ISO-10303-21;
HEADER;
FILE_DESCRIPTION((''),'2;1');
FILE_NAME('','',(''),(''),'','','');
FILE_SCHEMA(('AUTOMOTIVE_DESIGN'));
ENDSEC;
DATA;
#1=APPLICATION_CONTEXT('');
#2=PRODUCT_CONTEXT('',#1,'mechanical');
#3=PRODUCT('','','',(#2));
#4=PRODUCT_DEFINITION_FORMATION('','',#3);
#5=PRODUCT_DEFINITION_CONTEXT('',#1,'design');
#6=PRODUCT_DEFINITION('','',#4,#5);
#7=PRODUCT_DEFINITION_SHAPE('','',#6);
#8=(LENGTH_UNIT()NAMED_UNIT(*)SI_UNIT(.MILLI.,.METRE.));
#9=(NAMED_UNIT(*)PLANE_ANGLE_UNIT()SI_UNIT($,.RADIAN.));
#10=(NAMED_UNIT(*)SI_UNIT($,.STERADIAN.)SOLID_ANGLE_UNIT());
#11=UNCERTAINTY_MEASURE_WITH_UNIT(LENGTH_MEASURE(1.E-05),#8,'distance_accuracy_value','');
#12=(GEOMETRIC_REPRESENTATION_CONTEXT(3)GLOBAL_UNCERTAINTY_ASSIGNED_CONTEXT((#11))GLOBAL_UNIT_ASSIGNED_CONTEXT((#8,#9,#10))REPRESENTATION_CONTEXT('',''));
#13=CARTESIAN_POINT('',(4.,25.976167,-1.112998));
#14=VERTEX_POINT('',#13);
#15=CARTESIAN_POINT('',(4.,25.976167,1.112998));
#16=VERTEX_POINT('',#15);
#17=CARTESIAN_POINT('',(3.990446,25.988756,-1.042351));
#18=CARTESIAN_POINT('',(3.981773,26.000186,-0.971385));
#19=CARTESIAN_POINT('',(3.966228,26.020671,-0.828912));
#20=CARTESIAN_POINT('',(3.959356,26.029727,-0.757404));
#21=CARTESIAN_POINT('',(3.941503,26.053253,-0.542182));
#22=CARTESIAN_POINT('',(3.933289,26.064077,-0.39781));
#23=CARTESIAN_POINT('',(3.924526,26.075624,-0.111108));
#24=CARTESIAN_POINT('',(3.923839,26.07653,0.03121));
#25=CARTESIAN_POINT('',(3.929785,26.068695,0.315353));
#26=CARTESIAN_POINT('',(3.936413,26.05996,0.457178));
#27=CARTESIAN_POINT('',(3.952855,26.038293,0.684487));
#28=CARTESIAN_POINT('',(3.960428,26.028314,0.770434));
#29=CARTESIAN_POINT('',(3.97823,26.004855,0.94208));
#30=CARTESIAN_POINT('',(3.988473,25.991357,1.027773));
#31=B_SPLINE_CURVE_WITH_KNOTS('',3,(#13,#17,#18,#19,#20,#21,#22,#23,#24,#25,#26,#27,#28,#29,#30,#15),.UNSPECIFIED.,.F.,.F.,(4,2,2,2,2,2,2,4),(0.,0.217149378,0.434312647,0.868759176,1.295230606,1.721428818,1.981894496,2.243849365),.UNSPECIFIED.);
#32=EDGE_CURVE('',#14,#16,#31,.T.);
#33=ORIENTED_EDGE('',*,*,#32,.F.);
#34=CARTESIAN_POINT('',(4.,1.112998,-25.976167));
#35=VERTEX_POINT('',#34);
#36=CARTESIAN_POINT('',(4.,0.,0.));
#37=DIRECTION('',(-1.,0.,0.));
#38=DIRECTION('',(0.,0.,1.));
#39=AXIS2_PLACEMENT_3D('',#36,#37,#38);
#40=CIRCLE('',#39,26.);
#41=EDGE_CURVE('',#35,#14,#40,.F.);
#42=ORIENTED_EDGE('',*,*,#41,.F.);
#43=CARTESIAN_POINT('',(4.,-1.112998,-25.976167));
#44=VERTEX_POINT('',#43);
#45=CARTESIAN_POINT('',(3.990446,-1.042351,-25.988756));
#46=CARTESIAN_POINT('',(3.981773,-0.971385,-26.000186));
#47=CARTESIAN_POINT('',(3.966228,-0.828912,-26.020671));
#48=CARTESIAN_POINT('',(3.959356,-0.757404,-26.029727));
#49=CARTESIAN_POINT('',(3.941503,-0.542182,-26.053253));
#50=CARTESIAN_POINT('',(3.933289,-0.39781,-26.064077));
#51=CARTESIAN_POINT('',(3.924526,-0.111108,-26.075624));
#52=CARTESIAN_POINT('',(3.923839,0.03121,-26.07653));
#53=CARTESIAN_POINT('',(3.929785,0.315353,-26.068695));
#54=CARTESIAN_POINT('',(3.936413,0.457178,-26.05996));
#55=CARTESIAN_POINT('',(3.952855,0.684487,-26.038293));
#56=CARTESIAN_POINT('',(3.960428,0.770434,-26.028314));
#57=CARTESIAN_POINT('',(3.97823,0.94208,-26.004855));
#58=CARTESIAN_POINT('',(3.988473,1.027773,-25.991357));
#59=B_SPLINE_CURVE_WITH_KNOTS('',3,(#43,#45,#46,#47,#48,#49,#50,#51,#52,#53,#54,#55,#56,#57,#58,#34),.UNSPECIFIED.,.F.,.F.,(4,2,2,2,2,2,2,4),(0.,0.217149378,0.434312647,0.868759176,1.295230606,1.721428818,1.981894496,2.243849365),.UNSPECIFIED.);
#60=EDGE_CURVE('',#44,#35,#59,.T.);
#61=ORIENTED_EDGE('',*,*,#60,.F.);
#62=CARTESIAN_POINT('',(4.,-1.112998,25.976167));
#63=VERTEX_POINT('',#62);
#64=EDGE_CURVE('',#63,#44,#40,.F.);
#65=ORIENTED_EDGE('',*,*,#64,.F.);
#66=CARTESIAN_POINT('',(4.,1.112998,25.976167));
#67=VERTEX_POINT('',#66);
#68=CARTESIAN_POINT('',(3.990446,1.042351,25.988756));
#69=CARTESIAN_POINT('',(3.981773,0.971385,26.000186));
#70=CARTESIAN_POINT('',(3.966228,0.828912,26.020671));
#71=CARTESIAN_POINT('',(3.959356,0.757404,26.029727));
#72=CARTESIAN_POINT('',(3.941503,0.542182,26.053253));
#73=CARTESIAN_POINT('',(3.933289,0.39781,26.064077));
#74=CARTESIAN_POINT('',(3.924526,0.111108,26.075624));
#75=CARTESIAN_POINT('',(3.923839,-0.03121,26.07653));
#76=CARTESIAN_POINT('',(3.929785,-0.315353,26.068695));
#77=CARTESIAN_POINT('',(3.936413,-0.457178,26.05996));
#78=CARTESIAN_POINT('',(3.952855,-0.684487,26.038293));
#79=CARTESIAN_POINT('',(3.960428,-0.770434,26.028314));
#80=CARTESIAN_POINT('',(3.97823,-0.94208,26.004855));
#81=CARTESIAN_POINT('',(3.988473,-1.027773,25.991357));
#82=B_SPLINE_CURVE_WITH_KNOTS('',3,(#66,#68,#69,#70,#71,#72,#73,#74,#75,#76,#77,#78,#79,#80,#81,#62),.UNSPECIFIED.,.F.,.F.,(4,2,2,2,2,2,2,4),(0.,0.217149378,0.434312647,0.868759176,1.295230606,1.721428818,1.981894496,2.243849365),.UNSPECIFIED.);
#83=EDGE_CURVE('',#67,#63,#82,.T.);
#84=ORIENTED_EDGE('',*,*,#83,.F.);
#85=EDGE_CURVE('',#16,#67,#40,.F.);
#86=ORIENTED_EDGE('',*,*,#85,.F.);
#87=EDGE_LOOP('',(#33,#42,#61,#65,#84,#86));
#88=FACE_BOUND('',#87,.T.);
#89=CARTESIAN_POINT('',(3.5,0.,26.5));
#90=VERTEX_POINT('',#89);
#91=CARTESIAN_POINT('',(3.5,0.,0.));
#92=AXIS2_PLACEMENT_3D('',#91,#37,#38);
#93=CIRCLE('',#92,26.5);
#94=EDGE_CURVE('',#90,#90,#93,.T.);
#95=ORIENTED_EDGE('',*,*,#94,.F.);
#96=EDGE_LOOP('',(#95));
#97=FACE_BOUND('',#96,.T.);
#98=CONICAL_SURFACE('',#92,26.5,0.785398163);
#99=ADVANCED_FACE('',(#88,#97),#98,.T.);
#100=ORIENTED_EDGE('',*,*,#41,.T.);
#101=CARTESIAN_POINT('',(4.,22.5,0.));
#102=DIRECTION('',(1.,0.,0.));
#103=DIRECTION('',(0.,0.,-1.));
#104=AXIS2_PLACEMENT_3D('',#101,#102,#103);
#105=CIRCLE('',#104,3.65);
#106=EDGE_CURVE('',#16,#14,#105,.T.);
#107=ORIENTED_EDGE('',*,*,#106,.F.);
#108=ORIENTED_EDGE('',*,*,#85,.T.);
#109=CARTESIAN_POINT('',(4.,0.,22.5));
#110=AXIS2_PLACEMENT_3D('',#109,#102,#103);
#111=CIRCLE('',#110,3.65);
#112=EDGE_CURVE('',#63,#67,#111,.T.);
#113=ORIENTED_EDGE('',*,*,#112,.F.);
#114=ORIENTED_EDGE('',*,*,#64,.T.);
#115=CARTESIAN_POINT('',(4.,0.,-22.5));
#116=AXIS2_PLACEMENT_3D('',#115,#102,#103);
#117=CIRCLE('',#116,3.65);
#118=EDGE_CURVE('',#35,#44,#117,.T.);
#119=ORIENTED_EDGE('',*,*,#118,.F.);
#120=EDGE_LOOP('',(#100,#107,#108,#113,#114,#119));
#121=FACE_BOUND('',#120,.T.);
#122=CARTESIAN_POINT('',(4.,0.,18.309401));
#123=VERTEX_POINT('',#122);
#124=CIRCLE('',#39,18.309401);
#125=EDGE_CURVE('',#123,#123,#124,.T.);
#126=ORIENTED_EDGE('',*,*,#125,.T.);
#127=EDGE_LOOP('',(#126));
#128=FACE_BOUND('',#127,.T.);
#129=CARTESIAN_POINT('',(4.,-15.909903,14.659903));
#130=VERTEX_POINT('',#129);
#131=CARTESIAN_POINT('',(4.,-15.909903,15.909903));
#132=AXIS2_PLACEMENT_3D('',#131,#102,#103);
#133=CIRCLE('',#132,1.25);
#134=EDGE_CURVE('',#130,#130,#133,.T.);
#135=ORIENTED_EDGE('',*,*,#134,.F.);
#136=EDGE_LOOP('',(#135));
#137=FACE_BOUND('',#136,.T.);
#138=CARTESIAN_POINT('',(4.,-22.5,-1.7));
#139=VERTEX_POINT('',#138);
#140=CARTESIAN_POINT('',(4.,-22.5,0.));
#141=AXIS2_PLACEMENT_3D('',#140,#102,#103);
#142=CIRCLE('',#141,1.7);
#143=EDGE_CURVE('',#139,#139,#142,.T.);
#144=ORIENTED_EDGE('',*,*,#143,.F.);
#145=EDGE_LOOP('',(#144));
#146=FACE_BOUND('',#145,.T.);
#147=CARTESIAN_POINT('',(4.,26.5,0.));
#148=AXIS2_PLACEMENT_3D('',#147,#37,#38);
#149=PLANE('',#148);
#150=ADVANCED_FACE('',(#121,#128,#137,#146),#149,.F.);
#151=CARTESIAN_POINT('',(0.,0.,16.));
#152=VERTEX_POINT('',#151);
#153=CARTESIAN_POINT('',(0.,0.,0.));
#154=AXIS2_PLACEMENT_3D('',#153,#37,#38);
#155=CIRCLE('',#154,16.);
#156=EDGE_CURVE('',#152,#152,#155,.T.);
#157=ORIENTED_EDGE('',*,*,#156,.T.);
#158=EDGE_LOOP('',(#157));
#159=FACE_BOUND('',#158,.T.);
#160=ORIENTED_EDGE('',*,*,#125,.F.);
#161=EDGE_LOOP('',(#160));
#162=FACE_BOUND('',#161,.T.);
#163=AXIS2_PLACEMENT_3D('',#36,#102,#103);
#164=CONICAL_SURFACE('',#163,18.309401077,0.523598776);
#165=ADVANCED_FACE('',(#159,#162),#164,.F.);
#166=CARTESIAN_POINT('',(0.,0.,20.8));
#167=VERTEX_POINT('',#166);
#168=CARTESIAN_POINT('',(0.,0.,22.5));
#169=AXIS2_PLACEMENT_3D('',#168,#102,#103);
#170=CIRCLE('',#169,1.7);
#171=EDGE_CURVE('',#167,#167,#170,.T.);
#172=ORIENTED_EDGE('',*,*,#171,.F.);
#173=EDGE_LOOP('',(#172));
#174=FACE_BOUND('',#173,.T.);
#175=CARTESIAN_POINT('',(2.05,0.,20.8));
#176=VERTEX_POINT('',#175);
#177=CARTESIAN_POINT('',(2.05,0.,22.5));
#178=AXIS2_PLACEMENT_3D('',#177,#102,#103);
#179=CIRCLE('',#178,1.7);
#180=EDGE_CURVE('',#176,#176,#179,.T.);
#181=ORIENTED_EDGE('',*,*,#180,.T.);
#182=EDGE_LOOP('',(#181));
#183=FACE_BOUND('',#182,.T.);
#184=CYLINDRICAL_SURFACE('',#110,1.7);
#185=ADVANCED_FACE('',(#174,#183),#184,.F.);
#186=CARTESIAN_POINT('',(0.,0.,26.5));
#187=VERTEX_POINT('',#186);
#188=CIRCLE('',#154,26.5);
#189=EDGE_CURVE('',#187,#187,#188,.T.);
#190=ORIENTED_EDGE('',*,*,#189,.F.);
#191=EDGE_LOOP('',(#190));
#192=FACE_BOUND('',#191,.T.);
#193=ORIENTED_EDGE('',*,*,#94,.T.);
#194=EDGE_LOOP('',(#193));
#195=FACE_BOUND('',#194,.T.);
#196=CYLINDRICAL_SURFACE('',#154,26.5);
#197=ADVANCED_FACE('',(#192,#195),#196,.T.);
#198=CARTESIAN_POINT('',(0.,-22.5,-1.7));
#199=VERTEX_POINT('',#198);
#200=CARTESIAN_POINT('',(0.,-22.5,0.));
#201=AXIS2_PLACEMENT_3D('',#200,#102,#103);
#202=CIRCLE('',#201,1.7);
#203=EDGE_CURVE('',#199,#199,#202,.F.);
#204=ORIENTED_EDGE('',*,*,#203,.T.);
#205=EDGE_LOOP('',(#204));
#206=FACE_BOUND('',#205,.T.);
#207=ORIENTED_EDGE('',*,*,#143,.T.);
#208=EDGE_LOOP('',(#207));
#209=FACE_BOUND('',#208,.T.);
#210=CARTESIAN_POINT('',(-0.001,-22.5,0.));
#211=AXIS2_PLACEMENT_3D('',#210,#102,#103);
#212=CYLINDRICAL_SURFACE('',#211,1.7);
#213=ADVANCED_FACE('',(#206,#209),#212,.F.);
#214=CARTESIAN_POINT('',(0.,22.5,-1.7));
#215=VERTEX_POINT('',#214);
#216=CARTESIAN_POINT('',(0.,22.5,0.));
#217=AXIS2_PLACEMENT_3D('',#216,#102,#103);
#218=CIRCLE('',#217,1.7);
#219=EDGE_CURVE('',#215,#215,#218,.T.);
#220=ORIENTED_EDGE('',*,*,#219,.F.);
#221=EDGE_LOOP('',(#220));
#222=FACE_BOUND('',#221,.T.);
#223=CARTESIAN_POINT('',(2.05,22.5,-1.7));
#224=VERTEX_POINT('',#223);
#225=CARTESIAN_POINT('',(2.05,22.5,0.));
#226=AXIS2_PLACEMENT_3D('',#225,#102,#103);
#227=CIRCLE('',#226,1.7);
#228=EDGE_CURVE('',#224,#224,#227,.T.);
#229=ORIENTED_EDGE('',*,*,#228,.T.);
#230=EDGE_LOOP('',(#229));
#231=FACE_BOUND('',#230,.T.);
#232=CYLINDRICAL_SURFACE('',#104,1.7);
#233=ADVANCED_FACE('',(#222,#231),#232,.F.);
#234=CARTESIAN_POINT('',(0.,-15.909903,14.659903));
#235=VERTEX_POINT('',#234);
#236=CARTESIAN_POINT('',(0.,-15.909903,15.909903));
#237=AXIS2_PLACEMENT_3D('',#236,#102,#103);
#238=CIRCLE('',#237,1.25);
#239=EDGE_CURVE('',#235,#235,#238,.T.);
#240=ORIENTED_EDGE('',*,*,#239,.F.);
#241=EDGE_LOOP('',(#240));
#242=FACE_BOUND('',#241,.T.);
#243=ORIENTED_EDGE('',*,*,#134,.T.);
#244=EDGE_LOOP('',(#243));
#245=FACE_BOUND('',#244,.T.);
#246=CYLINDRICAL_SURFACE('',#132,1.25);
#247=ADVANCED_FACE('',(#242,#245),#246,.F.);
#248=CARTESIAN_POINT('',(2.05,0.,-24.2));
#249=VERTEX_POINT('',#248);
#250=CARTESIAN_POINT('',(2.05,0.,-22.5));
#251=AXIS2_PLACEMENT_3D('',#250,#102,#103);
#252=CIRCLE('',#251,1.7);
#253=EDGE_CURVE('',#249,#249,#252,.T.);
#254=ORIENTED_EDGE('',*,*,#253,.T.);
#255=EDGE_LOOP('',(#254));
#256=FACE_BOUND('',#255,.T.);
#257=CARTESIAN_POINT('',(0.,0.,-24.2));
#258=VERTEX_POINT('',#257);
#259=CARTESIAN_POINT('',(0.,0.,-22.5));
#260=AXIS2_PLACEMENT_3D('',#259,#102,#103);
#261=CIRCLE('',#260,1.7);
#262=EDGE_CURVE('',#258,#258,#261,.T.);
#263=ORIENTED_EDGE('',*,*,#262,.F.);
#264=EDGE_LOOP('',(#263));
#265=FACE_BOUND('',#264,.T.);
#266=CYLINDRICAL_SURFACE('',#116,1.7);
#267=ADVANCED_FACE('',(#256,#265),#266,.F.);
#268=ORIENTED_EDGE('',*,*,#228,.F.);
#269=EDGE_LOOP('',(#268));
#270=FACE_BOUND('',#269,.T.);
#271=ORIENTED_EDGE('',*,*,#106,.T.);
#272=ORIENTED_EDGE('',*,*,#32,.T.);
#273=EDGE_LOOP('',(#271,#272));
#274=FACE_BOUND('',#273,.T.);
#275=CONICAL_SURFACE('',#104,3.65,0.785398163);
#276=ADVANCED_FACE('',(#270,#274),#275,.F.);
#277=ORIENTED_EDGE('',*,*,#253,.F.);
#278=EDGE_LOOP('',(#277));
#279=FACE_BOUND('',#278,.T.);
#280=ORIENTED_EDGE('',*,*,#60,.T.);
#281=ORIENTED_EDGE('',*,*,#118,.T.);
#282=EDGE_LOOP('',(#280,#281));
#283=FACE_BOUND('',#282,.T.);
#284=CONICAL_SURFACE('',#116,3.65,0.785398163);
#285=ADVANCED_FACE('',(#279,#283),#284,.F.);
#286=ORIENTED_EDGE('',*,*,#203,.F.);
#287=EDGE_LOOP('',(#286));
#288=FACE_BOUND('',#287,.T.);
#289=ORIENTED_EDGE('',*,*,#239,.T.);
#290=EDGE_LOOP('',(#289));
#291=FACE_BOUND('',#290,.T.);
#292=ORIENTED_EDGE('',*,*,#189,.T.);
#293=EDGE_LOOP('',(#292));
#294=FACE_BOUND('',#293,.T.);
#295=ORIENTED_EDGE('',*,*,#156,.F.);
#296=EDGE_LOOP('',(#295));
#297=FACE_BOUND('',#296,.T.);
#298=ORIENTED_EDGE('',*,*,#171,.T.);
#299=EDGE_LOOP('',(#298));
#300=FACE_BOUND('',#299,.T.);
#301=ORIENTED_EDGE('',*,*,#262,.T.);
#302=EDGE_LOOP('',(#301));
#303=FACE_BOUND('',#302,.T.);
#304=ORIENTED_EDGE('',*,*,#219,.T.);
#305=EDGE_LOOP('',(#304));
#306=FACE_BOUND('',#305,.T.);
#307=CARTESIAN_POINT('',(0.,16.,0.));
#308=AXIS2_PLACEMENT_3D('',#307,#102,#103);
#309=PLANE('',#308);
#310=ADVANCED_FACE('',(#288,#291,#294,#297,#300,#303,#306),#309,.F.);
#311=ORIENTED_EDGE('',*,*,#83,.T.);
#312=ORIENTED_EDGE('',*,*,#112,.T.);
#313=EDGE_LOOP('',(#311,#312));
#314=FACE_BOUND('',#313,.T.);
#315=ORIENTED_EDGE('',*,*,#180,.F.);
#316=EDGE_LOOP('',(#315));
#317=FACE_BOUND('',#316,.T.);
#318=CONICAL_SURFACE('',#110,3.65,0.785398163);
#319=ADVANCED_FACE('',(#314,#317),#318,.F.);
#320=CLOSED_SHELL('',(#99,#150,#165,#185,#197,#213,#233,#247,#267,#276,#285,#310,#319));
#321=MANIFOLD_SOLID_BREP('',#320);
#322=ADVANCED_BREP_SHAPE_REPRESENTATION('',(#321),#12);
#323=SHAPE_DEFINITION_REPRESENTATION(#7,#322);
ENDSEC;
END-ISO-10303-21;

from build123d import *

# Parameters (mm, degrees)
ESQUISSE1_W                                    = 4
ESQUISSE1_H                                    = 10.5
CHANFREIN1_SIZE                                = 2.309401077
CHANFREIN1_SIZE_2                              = 4
ENL_V_MAT_EXTRU_2_REACH                        = 39.69
ESQUISSE7_R                                    = 1.7
FRAISAGE_POUR_VIS_T_TE_FRAIS_E_M31_D           = 3.4
FRAISAGE_POUR_VIS_T_TE_FRAIS_E_M31_CSINK_D     = 7.3
FRAISAGE_POUR_VIS_T_TE_FRAIS_E_M31_CSINK_ANGLE = 90
TROU_TARAUD_M31_D                              = 2.5
CHANFREIN2_SIZE                                = 0.5


with BuildPart() as part:
    # Esquisse1 → Révolution1 (revolve)
    with BuildSketch(Plane.XY, mode=Mode.PRIVATE) as r_volution1_sk:
        with Locations((2, 21.25)):
            Rectangle(ESQUISSE1_W, ESQUISSE1_H)
    revolve(r_volution1_sk.sketch.rotate(Axis((0, 0, 0), (1, 0, 0)), 90), axis=Axis((0, 0, 0), (1, 0, 0)))

    # Chanfrein1
    # the kernel refuses this chamfer: 4, 2.309401077 mm, written as the material it takes off along each edge
    with BuildSketch(Plane(origin=(4, 0, 0), x_dir=(0, 0, 1), z_dir=(0, 1, 0))) as chanfrein1_piece_1:
        Polygon((16 + CHANFREIN1_SIZE, 0), (16, -CHANFREIN1_SIZE_2), (16, 0), align=None)
    revolve(axis=Axis((4, 0, 0), (1, 0, 0)), mode=Mode.SUBTRACT)

    # Esquisse7 → Enlèv. mat.-Extru.2 (cut, up to next)
    with BuildSketch(Plane(origin=(4, 0, 0), x_dir=(0, 0, -1), z_dir=(1, 0, 0)), mode=Mode.PRIVATE) as enl_v_mat_extru_2_sk1:
        with Locations((0, -22.5)):
            Circle(ESQUISSE7_R)
    enl_v_mat_extru_2_tool1 = extrude(enl_v_mat_extru_2_sk1.sketch, amount=-ENL_V_MAT_EXTRU_2_REACH, mode=Mode.PRIVATE) & part.part
    add(enl_v_mat_extru_2_tool1.solids().sort_by_distance((4, -22.5, 0))[0], mode=Mode.SUBTRACT)

    # Fraisage pour vis à tête fraisée M31 (through all)
    with Locations(Plane(origin=(4, 0, 0), x_dir=(0, 0, -1), z_dir=(1, 0, 0))):
        with Locations((0, 22.5), (-22.5, 0), (22.5, 0)):
            CounterSinkHole(FRAISAGE_POUR_VIS_T_TE_FRAIS_E_M31_D / 2, FRAISAGE_POUR_VIS_T_TE_FRAIS_E_M31_CSINK_D / 2, counter_sink_angle=FRAISAGE_POUR_VIS_T_TE_FRAIS_E_M31_CSINK_ANGLE)

    # Trou taraudé M31 (through all)
    with Locations(Plane(origin=(4, 0, 0), x_dir=(0, 0, -1), z_dir=(1, 0, 0))):
        with Locations((-15.909902577, -15.909902577)):
            Hole(TROU_TARAUD_M31_D / 2)

    # Chanfrein2
    # the kernel refuses this chamfer: 0.5 mm, written as the material it takes off along each edge
    with BuildSketch(Plane(origin=(4, 0, 0), x_dir=(0, 0, 1), z_dir=(0, 1, 0))) as chanfrein2_piece_1:
        Polygon((26.5, -CHANFREIN2_SIZE), (26.5 - CHANFREIN2_SIZE, 0), (26.5, 0), align=None)
    revolve(axis=Axis((4, 0, 0), (1, 0, 0)), mode=Mode.SUBTRACT)


solid = part.part
